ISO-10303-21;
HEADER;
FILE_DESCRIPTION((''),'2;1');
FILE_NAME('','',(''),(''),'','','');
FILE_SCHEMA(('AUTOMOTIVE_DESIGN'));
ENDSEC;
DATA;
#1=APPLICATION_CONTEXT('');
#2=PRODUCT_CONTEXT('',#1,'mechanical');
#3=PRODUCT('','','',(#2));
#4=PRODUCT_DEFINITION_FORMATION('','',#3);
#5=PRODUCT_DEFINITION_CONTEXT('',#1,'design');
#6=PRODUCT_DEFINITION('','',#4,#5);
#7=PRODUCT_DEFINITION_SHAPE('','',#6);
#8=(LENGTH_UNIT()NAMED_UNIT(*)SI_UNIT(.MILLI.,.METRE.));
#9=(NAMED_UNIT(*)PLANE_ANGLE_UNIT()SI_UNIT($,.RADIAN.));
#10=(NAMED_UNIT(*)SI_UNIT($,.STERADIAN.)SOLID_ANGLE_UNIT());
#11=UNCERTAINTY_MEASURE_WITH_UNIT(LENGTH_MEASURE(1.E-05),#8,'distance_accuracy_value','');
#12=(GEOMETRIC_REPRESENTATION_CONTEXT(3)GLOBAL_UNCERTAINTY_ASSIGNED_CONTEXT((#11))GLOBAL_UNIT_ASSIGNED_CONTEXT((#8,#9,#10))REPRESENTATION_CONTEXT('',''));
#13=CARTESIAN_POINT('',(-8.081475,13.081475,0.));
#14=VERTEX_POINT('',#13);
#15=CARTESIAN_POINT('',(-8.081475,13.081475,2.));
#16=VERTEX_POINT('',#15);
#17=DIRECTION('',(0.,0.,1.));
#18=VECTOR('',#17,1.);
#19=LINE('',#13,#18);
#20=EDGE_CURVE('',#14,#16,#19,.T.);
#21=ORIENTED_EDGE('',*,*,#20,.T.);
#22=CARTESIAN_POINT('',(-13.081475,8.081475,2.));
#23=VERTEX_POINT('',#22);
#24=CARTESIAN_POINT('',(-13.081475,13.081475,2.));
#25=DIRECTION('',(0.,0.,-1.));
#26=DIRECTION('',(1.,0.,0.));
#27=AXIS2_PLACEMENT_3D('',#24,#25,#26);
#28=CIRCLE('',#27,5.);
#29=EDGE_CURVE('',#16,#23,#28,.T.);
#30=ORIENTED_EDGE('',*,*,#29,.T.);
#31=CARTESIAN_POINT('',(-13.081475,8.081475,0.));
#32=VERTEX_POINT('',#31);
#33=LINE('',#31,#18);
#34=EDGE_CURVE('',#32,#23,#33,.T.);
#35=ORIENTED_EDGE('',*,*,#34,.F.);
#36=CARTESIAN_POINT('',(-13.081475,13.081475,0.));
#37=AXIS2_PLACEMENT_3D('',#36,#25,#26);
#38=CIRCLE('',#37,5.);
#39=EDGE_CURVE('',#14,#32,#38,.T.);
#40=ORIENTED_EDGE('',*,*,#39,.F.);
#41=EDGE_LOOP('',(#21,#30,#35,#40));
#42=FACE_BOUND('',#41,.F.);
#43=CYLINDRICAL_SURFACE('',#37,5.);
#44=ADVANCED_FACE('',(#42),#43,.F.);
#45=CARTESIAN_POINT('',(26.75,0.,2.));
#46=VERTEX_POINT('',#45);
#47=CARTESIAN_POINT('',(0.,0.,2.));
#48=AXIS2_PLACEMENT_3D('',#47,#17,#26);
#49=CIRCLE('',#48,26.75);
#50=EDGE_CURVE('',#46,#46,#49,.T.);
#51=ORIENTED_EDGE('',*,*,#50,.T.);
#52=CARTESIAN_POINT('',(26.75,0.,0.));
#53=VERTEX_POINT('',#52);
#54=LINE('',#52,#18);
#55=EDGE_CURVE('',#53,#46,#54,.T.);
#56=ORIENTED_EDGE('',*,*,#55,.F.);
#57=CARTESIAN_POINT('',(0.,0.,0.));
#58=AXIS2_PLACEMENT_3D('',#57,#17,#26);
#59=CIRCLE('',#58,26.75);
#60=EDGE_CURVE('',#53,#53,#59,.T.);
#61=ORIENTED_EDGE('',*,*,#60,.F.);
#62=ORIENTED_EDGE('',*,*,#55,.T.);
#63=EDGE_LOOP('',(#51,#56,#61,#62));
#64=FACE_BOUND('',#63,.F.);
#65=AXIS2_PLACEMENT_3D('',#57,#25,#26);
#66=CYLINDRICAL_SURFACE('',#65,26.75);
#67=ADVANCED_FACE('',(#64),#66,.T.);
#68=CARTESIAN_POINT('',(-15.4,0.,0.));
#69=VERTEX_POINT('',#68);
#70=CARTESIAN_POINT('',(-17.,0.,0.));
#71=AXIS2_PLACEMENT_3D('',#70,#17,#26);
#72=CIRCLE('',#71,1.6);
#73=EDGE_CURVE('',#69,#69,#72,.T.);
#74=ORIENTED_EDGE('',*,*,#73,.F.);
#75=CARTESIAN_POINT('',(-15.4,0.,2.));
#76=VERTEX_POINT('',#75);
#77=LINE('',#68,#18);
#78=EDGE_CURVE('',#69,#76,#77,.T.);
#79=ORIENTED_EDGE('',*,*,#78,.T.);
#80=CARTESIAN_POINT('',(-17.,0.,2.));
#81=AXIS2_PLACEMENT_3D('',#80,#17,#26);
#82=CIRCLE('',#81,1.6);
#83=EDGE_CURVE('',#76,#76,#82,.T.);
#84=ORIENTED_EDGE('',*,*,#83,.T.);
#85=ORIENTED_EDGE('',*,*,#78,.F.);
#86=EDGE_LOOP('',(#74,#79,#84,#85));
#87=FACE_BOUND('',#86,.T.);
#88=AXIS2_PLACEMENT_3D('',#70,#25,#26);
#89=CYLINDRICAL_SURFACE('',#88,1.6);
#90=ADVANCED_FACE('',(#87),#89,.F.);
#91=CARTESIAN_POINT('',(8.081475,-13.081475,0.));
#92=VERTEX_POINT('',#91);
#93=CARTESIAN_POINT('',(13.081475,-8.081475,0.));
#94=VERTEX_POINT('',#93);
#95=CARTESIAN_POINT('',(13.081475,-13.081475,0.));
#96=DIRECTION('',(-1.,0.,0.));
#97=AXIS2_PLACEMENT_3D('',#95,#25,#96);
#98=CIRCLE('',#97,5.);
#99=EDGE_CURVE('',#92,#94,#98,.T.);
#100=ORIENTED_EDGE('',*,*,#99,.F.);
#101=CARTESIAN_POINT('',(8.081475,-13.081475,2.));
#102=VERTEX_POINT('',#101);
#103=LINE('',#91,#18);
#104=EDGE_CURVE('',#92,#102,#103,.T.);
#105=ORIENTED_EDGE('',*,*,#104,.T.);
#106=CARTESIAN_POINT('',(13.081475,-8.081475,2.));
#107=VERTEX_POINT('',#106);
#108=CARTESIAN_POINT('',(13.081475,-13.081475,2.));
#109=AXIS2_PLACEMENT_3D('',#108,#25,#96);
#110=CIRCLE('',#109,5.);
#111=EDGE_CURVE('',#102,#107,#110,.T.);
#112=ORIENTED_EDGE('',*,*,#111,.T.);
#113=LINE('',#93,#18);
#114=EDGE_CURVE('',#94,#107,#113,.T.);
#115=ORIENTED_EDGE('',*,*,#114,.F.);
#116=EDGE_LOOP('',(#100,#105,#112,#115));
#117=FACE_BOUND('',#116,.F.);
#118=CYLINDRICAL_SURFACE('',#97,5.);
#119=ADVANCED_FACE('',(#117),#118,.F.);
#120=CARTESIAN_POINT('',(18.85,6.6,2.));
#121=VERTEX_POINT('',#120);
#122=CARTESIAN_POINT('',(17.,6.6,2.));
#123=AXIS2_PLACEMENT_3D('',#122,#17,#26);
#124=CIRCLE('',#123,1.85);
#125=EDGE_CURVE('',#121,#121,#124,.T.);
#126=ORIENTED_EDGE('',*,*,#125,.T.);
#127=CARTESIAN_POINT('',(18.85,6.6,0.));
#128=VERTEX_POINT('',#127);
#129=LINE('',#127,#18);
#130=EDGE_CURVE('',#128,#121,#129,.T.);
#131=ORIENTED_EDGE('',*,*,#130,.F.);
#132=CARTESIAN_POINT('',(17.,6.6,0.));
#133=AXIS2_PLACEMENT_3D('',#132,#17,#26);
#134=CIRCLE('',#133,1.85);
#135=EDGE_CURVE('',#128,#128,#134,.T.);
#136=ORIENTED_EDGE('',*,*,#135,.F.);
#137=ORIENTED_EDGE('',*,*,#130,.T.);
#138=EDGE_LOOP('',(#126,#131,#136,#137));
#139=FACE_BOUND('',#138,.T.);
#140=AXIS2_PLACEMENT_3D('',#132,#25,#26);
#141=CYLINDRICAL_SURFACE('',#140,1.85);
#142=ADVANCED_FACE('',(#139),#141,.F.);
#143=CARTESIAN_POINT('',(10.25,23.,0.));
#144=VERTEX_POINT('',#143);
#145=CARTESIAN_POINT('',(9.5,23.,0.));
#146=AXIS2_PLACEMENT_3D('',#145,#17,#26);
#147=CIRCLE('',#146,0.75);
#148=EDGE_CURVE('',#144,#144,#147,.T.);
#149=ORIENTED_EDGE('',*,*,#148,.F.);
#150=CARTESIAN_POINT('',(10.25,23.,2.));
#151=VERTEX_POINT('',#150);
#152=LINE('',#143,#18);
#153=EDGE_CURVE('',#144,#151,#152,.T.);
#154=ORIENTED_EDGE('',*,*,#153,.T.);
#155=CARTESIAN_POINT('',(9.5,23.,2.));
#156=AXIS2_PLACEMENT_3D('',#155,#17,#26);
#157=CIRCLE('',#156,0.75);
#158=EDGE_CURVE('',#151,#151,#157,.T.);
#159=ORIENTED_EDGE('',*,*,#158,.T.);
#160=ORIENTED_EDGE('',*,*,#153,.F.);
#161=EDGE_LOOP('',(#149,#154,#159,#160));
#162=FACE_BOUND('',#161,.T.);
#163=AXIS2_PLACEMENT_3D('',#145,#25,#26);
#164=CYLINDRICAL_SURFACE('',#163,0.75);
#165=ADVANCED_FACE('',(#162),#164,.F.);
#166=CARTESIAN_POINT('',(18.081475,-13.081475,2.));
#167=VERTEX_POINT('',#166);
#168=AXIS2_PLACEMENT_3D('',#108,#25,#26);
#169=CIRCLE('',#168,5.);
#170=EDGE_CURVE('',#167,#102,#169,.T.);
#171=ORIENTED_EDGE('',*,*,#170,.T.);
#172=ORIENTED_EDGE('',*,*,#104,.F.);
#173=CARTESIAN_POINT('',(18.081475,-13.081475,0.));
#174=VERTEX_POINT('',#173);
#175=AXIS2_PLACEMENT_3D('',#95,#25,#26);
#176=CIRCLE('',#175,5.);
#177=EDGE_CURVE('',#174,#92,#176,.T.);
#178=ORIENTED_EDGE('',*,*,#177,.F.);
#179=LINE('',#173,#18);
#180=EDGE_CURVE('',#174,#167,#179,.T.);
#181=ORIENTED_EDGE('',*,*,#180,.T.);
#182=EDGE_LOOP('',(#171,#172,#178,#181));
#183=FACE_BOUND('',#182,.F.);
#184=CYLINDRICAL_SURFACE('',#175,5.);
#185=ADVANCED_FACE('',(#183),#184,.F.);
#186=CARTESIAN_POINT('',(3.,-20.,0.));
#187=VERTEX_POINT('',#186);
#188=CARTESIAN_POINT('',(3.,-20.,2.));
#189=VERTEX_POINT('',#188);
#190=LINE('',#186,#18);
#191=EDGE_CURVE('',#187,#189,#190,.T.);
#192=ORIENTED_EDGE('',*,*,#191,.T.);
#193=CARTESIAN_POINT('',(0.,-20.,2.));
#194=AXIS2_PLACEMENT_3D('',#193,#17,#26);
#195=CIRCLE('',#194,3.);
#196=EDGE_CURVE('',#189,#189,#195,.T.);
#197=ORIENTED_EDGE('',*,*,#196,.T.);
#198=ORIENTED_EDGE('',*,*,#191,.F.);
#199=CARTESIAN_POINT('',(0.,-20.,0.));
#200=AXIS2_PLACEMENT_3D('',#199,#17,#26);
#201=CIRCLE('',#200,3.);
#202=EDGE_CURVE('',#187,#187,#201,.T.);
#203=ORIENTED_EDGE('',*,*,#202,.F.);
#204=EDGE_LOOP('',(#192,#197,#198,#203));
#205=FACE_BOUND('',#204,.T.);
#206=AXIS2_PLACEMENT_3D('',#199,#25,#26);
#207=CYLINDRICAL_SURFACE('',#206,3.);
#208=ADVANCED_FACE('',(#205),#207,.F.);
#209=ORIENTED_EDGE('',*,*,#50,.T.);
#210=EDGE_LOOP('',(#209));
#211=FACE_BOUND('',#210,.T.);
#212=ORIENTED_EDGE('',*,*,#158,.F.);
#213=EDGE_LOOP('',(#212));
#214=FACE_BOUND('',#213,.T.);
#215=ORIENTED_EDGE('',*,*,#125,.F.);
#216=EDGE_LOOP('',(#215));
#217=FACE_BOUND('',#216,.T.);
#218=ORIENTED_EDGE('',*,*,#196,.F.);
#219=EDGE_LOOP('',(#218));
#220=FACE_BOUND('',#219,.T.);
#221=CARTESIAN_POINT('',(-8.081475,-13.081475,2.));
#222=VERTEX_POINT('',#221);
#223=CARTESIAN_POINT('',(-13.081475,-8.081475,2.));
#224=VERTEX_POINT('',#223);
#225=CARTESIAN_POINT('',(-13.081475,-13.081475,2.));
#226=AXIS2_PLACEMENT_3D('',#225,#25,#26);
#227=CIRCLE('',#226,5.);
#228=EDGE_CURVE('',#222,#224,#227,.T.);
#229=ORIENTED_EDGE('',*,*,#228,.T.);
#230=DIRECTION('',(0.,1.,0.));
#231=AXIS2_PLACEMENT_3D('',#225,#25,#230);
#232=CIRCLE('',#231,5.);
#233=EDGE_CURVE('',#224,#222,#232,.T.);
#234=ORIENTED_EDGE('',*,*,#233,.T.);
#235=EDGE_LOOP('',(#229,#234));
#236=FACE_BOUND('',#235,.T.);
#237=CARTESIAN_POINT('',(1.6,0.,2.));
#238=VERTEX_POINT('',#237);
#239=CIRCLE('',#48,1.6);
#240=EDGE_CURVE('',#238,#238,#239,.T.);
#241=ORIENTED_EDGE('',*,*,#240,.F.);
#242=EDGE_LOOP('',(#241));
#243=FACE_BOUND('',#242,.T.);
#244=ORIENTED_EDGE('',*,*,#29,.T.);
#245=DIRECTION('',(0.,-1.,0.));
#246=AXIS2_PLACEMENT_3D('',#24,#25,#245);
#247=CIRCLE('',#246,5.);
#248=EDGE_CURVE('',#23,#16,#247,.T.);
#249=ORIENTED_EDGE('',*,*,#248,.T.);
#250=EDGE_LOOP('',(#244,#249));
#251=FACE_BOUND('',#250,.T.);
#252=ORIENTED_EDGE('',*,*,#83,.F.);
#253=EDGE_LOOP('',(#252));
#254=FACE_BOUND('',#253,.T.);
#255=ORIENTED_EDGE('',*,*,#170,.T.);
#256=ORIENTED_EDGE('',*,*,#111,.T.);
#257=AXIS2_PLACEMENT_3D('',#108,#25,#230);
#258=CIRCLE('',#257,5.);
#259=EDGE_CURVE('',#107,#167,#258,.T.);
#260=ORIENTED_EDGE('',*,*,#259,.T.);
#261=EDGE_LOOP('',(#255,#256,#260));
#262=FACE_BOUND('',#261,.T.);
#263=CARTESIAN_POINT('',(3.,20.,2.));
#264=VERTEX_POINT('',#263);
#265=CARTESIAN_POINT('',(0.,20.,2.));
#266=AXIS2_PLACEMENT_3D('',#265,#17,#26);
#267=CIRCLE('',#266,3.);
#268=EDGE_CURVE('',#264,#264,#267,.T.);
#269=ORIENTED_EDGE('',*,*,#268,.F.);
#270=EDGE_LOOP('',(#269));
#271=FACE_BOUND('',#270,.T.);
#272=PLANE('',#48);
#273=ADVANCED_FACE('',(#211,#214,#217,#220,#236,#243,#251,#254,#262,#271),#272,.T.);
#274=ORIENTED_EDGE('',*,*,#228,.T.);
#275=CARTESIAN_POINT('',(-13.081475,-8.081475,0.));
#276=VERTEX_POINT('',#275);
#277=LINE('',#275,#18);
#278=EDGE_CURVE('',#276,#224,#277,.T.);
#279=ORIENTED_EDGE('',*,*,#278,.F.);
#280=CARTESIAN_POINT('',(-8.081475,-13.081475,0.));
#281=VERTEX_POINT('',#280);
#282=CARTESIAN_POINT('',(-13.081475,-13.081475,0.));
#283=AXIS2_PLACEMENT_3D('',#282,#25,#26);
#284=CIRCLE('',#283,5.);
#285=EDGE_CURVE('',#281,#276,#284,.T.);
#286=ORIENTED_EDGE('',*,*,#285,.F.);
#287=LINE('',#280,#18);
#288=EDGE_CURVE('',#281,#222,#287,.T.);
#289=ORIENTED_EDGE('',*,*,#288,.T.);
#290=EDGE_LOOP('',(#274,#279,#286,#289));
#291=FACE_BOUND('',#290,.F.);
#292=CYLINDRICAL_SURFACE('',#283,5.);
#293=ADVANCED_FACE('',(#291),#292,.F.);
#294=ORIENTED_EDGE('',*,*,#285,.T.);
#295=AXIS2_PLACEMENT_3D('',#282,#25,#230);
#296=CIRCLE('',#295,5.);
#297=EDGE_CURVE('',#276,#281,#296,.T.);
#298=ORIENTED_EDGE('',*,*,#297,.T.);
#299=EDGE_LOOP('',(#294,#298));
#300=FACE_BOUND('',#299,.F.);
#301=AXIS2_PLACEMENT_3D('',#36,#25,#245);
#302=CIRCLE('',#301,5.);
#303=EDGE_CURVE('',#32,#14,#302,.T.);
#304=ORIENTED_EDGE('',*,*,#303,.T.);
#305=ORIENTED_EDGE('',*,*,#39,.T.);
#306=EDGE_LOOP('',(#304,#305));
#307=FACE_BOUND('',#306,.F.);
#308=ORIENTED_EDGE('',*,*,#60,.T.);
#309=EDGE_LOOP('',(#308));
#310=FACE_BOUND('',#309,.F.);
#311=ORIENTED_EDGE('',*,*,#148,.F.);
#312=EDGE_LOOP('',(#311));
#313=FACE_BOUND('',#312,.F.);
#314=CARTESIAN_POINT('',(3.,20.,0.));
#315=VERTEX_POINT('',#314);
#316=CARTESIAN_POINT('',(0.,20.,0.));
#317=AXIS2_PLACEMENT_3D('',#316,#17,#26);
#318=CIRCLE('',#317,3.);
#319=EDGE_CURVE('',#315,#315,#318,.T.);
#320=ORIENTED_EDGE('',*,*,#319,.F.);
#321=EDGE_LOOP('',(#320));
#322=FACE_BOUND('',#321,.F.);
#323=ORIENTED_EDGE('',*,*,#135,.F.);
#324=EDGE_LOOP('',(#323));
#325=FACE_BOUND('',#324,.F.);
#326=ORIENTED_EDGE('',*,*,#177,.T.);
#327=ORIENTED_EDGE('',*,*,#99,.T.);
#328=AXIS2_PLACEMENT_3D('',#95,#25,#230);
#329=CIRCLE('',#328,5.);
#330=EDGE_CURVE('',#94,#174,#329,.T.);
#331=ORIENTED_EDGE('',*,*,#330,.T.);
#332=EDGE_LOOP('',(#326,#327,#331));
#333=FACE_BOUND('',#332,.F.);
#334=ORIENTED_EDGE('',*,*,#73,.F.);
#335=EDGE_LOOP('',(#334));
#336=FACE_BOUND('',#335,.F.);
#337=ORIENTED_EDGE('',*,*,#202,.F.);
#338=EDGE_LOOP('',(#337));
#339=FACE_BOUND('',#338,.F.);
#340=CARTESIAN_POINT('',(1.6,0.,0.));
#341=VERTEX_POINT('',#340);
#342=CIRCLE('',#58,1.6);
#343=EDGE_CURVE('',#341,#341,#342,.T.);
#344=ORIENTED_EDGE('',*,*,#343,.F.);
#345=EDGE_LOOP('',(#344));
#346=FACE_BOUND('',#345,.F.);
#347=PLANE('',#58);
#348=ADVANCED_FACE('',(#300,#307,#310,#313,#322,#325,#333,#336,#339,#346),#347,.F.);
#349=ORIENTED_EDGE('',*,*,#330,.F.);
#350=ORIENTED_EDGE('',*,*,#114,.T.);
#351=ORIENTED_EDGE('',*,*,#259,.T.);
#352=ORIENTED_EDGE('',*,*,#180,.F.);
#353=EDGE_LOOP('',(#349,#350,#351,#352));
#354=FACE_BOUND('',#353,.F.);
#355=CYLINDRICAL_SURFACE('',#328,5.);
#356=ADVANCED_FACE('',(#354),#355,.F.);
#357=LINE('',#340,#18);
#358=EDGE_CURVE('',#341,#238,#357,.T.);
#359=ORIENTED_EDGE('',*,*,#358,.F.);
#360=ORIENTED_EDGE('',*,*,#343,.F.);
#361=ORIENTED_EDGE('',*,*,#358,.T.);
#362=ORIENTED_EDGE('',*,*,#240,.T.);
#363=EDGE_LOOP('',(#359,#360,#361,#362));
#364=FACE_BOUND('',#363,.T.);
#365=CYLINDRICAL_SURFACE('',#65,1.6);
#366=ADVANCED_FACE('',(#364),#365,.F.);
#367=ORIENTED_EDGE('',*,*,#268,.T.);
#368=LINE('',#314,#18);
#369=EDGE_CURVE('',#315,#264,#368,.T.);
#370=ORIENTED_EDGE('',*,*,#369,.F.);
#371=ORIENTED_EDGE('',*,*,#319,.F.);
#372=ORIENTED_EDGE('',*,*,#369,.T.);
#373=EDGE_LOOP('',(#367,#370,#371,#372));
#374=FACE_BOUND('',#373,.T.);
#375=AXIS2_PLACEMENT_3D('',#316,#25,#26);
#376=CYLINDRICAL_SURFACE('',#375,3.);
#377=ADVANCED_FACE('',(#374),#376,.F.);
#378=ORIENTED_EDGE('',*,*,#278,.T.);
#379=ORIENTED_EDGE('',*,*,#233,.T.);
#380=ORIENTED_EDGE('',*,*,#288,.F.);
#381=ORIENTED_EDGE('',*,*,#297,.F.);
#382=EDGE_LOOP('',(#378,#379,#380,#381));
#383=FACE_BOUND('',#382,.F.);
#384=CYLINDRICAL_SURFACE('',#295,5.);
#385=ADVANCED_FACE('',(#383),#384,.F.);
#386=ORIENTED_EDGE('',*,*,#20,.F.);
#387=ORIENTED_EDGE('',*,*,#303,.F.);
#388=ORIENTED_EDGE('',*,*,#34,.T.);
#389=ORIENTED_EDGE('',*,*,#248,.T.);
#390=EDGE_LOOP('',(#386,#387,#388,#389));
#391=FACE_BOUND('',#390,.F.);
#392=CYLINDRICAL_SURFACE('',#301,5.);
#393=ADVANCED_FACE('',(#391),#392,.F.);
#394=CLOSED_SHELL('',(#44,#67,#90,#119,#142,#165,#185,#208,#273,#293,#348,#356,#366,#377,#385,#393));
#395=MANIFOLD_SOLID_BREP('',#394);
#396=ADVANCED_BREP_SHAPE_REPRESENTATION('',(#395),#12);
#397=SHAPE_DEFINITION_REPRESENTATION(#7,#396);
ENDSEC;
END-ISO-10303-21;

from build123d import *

# Parameters (mm, degrees)
F0_R     = 26.75
F0_R_2   = 3
F0_R_3   = 1.6
F0_R_4   = 1.85
F0_R_5   = 0.75
F1_DEPTH = 2


# Not quite as in the source:
# - a feature names something its author has since deleted; it is built from what else it names


with BuildPart() as f1:
    # F0 (on Top) → F1 (new body)
    with BuildSketch(Plane.XY):
        Circle(F0_R)
        with Locations((0, -20)):
            Circle(F0_R_2, mode=Mode.SUBTRACT)
        with Locations((-17, 0)):
            Circle(F0_R_3, mode=Mode.SUBTRACT)
        with BuildLine():
            Line((-8.081475452, 13.081475452), (13.081475452, 13.081475452))
            Line((13.081475452, 13.081475452), (13.081475452, -8.081475452))
            ThreePointArc((13.081475452, -8.081475452), (16.6170093579, -9.545941546), (18.081475452, -13.081475452))
            ThreePointArc((18.081475452, -13.081475452), (13.081475452, -18.081475452), (8.081475452, -13.081475452))
            Line((8.081475452, -13.081475452), (-8.081475452, -13.081475452))
            ThreePointArc((-8.081475452, -13.081475452), (-16.6170093579, -16.6170093579), (-13.081475452, -8.081475452))
            Line((-13.081475452, -8.081475452), (-13.081475452, 8.081475452))
            ThreePointArc((-13.081475452, 8.081475452), (-16.6170093579, 16.6170093579), (-8.081475452, 13.081475452))
        make_face(mode=Mode.SUBTRACT)
        with Locations((0, 20)):
            Circle(F0_R_2, mode=Mode.SUBTRACT)
        with Locations((17, 6.6)):
            Circle(F0_R_4, mode=Mode.SUBTRACT)
        with Locations((9.5, 23)):
            Circle(F0_R_5, mode=Mode.SUBTRACT)
        with BuildLine():
            Line((13.081475452, -8.081475452), (13.081475452, 13.081475452))
            Line((13.081475452, 13.081475452), (-8.081475452, 13.081475452))
            ThreePointArc((-8.081475452, 13.081475452), (-9.545941546, 9.545941546), (-13.081475452, 8.081475452))
            Line((-13.081475452, 8.081475452), (-13.081475452, -8.081475452))
            ThreePointArc((-13.081475452, -8.081475452), (-9.545941546, -9.545941546), (-8.081475452, -13.081475452))
            Line((-8.081475452, -13.081475452), (8.081475452, -13.081475452))
            ThreePointArc((8.081475452, -13.081475452), (9.545941546, -9.545941546), (13.081475452, -8.081475452))
        make_face()
        Circle(F0_R_3, mode=Mode.SUBTRACT)
    extrude(amount=F1_DEPTH)


solid = f1.part
